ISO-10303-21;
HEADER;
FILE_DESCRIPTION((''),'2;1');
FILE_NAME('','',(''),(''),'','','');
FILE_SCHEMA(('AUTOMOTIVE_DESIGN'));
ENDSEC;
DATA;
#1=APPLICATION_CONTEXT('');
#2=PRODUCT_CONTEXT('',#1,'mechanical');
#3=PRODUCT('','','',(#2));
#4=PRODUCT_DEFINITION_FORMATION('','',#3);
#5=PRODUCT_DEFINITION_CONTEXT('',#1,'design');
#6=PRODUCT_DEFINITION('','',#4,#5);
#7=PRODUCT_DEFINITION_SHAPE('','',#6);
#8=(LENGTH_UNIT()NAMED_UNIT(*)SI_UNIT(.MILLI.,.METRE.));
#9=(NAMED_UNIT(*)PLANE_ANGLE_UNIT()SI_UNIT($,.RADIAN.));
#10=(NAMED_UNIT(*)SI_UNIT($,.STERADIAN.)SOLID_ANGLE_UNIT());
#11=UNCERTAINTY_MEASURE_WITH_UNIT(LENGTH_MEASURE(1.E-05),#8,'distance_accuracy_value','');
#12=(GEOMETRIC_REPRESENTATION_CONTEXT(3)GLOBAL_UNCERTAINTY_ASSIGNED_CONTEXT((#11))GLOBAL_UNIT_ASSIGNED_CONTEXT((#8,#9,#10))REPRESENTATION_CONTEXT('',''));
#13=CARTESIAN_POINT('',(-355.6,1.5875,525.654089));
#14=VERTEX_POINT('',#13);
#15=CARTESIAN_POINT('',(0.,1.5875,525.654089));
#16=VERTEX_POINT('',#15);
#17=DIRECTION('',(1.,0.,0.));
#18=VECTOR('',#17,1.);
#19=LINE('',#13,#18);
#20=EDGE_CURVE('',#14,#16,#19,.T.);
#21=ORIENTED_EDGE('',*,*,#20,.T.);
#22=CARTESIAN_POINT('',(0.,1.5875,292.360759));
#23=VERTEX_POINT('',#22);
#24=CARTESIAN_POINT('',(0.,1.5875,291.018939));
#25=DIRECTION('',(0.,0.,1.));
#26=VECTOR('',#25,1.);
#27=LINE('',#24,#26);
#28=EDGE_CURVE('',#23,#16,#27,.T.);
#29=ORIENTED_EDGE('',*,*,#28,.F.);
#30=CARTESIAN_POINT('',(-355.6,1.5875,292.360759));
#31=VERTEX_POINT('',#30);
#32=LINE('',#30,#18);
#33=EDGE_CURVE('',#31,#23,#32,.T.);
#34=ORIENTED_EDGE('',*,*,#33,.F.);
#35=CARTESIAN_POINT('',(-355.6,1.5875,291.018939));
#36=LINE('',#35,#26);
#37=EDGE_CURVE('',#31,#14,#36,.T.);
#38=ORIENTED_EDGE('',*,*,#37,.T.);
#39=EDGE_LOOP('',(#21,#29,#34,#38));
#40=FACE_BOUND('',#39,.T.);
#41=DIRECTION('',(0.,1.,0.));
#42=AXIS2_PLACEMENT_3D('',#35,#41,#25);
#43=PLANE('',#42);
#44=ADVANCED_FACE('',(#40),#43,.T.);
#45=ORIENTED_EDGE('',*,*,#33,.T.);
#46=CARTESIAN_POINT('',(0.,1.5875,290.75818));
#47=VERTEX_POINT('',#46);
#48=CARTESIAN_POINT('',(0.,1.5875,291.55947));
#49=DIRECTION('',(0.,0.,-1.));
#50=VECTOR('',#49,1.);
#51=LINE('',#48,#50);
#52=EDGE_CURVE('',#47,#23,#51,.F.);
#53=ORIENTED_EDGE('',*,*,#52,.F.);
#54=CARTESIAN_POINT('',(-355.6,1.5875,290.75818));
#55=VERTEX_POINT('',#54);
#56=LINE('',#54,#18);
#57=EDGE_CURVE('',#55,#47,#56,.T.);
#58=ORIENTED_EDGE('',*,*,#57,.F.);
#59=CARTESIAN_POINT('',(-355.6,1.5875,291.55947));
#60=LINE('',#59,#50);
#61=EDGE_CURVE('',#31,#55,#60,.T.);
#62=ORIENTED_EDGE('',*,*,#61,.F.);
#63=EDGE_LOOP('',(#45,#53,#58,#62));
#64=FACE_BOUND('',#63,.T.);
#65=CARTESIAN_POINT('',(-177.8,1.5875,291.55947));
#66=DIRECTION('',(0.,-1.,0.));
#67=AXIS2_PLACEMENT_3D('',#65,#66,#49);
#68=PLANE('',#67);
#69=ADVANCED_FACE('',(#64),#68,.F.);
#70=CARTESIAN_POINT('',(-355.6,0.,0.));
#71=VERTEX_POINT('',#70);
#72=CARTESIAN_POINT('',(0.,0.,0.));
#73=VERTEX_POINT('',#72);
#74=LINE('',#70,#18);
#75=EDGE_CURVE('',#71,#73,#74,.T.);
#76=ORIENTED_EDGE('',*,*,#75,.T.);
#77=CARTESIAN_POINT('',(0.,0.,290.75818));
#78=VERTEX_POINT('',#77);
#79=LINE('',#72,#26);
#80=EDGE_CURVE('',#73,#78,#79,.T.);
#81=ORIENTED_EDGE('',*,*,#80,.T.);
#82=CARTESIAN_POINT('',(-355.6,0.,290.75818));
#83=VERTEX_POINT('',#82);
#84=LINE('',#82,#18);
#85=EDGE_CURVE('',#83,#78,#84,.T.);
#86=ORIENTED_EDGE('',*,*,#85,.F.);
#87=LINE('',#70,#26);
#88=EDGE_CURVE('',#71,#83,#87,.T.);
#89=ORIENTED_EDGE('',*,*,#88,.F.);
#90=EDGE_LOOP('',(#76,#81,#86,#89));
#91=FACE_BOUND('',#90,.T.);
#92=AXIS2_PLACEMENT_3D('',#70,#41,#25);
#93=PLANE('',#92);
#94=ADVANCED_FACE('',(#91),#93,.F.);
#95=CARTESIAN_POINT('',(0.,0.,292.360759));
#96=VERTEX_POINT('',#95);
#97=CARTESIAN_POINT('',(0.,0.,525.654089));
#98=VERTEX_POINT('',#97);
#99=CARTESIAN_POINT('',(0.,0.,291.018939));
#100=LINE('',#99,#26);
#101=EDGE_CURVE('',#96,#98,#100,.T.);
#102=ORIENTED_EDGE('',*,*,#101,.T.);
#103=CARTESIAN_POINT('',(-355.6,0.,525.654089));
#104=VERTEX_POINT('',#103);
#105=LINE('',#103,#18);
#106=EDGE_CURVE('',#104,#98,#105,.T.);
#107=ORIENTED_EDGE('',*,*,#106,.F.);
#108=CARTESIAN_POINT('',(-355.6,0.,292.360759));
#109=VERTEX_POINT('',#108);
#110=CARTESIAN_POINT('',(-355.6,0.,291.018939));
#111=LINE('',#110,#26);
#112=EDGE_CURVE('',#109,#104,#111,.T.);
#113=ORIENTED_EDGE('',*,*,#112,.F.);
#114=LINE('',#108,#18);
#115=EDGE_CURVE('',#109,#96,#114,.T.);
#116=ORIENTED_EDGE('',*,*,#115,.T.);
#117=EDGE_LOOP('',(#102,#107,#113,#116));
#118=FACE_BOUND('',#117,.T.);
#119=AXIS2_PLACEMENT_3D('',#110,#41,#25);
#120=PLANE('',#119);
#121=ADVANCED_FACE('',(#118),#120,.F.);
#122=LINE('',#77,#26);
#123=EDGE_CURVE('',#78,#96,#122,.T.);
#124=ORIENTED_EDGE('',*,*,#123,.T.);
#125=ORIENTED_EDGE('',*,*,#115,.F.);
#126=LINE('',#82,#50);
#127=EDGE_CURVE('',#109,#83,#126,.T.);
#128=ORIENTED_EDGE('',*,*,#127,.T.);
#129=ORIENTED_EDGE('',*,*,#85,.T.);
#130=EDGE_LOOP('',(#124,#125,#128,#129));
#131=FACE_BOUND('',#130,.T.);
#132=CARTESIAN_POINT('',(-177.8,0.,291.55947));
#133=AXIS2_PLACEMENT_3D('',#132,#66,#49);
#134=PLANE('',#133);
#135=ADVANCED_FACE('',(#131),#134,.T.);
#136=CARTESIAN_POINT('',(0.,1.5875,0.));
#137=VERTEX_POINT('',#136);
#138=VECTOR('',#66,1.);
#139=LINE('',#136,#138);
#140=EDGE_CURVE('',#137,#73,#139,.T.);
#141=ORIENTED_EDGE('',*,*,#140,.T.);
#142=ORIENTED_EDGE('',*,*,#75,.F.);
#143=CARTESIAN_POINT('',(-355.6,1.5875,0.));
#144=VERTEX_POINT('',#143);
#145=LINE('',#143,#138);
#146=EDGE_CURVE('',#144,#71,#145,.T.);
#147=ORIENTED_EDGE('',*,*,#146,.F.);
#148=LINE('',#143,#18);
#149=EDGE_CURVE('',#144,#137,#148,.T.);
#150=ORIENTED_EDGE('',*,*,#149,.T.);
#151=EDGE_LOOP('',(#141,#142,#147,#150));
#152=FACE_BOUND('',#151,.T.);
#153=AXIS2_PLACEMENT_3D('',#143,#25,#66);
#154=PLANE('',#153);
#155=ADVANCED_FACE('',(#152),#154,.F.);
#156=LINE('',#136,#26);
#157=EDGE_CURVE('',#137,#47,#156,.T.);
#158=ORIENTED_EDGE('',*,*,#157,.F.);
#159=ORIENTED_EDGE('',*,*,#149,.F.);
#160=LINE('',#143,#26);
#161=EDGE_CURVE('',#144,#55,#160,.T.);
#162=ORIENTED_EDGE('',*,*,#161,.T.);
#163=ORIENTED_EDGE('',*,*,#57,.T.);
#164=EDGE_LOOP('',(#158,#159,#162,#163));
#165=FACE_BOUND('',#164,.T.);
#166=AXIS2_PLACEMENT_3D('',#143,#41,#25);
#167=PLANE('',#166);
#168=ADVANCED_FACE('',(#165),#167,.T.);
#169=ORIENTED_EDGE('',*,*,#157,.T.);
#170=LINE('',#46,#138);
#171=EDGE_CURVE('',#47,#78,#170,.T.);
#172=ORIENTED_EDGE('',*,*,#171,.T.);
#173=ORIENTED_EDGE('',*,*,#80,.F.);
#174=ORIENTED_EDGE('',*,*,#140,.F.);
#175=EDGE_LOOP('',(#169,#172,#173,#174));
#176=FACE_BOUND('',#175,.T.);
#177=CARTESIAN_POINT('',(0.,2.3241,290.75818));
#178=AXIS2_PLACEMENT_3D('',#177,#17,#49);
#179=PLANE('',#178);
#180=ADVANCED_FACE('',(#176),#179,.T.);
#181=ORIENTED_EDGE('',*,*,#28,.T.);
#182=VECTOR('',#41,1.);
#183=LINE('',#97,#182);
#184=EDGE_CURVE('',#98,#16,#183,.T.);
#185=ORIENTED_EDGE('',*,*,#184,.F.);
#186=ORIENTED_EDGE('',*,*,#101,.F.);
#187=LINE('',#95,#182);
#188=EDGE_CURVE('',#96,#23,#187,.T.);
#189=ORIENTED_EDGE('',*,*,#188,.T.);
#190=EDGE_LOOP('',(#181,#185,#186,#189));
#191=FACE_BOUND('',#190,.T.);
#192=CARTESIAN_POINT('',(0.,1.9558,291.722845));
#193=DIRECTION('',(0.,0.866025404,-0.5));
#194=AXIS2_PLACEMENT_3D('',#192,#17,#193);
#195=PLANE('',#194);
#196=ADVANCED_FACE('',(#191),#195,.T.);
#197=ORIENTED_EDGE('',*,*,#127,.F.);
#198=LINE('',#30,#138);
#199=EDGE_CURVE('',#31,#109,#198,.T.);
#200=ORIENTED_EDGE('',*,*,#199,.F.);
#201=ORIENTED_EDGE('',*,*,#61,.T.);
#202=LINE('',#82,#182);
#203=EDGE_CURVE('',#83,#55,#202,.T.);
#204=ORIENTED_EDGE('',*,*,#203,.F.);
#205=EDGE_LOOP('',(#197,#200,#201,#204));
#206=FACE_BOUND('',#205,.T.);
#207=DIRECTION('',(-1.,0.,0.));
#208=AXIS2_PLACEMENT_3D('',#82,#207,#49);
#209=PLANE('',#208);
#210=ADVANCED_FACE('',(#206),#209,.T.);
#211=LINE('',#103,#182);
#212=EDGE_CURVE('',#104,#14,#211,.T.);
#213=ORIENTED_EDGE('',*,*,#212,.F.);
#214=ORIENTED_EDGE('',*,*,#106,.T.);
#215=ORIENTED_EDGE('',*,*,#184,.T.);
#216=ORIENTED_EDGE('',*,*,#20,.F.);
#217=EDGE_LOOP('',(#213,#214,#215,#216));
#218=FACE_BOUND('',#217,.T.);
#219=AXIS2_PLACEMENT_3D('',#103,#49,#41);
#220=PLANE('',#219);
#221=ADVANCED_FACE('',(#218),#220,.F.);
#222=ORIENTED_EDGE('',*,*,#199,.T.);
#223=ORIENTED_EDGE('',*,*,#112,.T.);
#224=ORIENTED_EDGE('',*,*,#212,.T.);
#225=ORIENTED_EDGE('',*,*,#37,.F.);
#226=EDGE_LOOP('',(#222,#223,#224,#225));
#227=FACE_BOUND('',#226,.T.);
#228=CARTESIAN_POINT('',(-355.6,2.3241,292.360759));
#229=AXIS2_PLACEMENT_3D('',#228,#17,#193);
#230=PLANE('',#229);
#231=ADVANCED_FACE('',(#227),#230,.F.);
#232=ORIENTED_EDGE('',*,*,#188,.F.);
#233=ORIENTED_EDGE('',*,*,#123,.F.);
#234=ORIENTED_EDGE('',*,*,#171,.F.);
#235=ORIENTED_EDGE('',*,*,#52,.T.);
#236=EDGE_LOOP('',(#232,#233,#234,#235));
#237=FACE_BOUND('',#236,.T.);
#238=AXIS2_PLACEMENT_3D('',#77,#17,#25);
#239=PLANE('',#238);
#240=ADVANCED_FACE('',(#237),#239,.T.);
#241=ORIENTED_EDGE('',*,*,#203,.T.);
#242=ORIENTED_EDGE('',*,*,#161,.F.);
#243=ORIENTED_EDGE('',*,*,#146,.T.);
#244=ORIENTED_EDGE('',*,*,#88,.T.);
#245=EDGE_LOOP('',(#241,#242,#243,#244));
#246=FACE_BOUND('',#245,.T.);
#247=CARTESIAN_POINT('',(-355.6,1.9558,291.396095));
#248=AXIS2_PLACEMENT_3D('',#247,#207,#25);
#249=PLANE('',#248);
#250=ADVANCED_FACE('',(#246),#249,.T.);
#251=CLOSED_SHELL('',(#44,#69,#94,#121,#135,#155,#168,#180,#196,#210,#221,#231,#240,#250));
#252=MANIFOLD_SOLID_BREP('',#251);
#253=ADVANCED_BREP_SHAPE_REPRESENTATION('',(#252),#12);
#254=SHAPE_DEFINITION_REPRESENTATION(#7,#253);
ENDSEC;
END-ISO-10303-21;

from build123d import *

# Parameters (mm, degrees)
BASE_FLANGE1_DEPTH = 355.6
UNFOLD1_START      = -355.6
UNFOLD1_DEPTH      = 355.6
UNFOLD1_2_DEPTH    = 355.6


# Read off the part's stored shape, not the designer's step: Unfold1
# Sheet-metal steps are written as plain solids
with BuildPart() as part:
    # Sketch1 → Base-Flange1 (new body)
    with BuildSketch(Plane(origin=(0, 0, 0), x_dir=(0, 0, -1), z_dir=(1, 0, 0))):
        with BuildLine():
            Line((0, 0), (-290.758180239, 0))
            ThreePointArc((-290.758180239, 0), (-291.920230239, 0.311370359), (-292.77090988, 1.16205))
            Line((-292.77090988, 1.16205), (-409.417574699, 203.2))
            Line((-409.417574699, 203.2), (-408.042759371, 203.99375))
            Line((-408.042759371, 203.99375), (-291.396094552, 1.9558))
            ThreePointArc((-291.396094552, 1.9558), (-291.126480239, 1.686185688), (-290.758180239, 1.5875))
            Line((-290.758180239, 1.5875), (0, 1.5875))
            Line((0, 1.5875), (0, 0))
        make_face()
    extrude(amount=-BASE_FLANGE1_DEPTH)

    # Unfold1 outline → Unfold1 (cut)
    with BuildSketch(Plane.YZ.offset(UNFOLD1_START)):
        with BuildLine():
            Line((1.5875, 293.016543552), (1.5875, 290.758180239))
            ThreePointArc((1.5875, 290.758180239), (1.686185688, 291.126480239), (1.9558, 291.396094552))
            Line((1.9558, 291.396094552), (203.99375, 408.042759371))
            Line((203.99375, 408.042759371), (203.2, 409.417574699))
            Line((203.2, 409.417574699), (1.5875, 293.016543552))
        make_face()
    extrude(amount=UNFOLD1_DEPTH, mode=Mode.SUBTRACT)

    # Unfold1 2 outline → Unfold1 2 (add)
    with BuildSketch(Plane.YZ.offset(UNFOLD1_START)):
        with BuildLine():
            Line((1.16205, 292.77090988), (1.5875, 293.016543552))
            Line((1.5875, 293.016543552), (1.5875, 525.65408865))
            Line((1.5875, 525.65408865), (0, 525.65408865))
            Line((0, 525.65408865), (0, 290.758180239))
            ThreePointArc((0, 290.758180239), (0.311370359, 291.920230239), (1.16205, 292.77090988))
        make_face()
    extrude(amount=UNFOLD1_2_DEPTH)


solid = part.part
